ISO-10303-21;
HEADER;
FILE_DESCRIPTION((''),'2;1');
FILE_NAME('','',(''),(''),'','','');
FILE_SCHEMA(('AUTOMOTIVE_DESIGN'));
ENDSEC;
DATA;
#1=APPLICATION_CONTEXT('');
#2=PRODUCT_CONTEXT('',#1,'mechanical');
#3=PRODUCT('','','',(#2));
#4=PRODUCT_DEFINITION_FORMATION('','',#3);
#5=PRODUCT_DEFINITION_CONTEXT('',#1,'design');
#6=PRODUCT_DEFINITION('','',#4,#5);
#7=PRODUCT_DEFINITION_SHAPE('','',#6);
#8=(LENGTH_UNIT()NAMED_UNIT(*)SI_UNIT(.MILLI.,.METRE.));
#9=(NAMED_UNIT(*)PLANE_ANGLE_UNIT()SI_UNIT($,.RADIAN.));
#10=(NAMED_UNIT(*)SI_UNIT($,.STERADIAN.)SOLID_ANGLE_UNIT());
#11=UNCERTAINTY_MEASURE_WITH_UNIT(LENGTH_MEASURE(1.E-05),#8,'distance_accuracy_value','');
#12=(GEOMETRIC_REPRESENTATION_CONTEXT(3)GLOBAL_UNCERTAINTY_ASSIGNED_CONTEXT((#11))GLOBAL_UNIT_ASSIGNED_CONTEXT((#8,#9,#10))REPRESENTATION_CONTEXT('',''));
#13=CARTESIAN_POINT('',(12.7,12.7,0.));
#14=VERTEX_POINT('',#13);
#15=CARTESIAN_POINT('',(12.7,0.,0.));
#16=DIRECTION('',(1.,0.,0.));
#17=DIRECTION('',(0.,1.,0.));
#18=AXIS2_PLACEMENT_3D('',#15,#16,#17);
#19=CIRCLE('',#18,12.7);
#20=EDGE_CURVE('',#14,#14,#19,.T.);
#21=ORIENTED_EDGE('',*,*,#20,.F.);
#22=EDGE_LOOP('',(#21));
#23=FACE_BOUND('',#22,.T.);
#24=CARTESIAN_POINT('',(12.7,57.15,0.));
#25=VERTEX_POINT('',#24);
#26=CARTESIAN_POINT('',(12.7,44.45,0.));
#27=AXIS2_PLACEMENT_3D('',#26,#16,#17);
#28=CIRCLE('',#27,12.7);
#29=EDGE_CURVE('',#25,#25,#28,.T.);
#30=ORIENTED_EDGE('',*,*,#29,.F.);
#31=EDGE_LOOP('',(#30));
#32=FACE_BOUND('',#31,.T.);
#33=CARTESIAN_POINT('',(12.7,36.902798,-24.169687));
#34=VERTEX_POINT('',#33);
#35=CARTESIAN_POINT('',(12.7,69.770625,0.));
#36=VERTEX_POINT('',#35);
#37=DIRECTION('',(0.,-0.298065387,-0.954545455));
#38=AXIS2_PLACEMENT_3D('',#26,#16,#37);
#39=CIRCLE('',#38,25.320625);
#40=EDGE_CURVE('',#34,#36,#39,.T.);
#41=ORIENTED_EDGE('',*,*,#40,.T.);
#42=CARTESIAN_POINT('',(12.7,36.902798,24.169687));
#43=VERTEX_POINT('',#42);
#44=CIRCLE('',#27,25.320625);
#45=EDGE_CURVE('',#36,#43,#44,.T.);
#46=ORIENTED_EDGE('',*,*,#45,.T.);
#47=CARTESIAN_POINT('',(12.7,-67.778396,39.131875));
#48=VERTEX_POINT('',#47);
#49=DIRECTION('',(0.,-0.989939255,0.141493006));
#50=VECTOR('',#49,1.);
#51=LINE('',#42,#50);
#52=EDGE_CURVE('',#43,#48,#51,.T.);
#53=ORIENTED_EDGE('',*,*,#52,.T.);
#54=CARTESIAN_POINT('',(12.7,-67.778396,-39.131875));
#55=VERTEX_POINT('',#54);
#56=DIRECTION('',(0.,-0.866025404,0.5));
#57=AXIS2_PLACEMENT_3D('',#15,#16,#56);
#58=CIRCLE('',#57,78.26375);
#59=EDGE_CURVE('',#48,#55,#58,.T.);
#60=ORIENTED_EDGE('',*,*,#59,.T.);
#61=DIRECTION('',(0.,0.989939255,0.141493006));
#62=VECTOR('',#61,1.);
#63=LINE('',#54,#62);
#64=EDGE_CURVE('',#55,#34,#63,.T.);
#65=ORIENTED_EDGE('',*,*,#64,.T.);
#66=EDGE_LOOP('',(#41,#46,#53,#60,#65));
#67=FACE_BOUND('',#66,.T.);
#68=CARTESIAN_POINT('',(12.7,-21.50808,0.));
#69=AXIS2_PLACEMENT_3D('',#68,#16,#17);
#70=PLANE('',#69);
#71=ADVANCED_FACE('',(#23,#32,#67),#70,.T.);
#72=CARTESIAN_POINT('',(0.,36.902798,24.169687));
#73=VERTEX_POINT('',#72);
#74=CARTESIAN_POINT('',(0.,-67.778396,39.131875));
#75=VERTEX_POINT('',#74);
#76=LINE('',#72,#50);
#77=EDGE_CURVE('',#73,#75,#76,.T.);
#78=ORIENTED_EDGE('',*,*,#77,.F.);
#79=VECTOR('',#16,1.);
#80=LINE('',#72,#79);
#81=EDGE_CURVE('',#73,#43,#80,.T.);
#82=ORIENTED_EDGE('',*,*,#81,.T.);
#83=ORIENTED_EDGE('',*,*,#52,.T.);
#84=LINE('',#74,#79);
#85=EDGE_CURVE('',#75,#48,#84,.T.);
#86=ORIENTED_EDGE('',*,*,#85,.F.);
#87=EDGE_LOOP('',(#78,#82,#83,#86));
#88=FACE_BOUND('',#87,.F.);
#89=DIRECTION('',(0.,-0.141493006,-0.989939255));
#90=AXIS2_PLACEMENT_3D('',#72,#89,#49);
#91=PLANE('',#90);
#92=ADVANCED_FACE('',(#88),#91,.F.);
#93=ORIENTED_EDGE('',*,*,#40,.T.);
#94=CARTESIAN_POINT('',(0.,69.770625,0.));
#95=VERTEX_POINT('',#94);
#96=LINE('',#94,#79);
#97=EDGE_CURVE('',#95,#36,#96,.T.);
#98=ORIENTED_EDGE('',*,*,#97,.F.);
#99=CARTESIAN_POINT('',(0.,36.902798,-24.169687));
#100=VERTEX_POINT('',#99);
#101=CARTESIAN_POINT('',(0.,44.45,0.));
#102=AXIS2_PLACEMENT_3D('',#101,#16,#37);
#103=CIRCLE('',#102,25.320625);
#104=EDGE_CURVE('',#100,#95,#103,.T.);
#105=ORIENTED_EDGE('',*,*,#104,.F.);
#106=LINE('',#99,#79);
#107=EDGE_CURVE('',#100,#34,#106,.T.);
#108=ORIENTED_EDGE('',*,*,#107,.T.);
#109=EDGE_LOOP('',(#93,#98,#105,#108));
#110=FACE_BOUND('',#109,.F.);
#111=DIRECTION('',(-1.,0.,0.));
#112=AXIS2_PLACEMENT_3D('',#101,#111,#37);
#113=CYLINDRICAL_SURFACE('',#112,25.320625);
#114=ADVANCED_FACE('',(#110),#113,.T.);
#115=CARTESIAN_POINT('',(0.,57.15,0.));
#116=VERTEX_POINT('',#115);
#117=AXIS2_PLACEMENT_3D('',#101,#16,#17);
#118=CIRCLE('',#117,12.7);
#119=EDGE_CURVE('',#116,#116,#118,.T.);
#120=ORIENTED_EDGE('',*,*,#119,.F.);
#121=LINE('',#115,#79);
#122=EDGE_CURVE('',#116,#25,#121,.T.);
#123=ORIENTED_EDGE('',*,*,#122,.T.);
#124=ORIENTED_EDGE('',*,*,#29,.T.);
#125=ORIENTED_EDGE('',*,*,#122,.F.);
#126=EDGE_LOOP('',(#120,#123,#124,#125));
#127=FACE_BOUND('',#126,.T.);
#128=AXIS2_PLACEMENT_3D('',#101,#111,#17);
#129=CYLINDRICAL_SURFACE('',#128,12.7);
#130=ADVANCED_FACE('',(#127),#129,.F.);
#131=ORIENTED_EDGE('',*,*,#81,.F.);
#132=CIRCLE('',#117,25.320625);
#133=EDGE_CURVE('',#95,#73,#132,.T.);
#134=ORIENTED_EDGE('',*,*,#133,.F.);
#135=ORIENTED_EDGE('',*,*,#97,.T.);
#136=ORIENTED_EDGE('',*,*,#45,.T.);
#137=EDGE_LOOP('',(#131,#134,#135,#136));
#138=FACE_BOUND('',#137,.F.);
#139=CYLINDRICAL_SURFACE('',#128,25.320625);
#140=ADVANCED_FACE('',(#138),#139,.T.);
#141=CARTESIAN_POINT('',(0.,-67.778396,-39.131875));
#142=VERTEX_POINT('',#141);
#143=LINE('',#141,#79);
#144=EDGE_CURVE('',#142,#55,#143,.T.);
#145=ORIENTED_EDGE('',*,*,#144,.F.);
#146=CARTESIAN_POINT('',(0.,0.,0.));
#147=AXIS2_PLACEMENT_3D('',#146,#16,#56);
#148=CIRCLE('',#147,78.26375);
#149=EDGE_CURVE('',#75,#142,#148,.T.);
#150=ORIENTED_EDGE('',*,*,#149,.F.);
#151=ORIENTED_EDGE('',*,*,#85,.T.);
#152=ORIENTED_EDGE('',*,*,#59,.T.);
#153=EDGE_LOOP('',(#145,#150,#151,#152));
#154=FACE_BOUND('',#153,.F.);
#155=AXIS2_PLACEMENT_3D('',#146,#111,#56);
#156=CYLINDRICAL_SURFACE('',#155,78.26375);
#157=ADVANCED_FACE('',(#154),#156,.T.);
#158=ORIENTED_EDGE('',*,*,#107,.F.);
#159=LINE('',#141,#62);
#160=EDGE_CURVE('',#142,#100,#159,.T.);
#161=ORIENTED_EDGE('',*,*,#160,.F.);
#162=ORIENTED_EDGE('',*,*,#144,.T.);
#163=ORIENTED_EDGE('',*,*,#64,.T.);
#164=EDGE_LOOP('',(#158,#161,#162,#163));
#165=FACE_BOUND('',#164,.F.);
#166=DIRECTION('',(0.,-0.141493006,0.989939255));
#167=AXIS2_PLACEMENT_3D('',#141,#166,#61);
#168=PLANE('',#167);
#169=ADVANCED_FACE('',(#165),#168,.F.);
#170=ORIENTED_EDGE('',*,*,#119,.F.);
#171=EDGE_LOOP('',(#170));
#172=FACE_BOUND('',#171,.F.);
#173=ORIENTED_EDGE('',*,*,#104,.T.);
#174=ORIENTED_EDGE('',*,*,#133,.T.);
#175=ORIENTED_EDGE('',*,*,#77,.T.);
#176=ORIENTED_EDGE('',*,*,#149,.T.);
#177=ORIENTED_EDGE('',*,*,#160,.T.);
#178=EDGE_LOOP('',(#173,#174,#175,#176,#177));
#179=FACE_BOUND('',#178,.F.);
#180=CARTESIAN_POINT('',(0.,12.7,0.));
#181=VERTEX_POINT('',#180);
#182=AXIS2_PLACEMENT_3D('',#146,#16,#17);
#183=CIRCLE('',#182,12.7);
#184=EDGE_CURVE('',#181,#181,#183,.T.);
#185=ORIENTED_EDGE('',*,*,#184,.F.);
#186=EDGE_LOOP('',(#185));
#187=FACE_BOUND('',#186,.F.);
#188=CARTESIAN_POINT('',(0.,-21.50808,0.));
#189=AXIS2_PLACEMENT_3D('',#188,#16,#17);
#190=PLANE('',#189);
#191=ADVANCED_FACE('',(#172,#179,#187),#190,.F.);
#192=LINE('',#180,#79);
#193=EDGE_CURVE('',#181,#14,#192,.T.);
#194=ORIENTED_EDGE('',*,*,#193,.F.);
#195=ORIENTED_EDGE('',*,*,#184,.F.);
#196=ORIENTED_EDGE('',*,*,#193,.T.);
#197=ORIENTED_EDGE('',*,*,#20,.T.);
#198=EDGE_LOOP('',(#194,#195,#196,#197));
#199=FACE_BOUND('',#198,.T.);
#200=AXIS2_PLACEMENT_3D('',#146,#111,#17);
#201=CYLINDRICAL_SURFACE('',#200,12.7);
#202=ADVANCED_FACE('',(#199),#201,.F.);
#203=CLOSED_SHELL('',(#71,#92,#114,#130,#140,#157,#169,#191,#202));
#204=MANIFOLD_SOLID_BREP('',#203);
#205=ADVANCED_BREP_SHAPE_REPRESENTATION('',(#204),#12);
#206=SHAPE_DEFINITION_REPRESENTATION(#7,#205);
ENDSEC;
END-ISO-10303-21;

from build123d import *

# Parameters (mm, degrees)
F0_R     = 12.7
F1_DEPTH = 12.7


# Not quite as in the source:
# - a length typed as a fraction of an inch, garbled in the dataset ("3 / 203.2 mm" for 3/8 in), is restored


with BuildPart() as f1:
    # F0 (on Right) → F1 (new body)
    with BuildSketch(Plane.YZ):
        with BuildLine():
            ThreePointArc((36.9027980984, -24.1696875), (19.129375, 0), (36.9027980984, 24.1696875))
            Line((36.9027980984, 24.1696875), (-67.7783956954, 39.131875))
            ThreePointArc((-67.7783956954, 39.131875), (-78.26375, 0), (-67.7783956954, -39.131875))
            Line((-67.7783956954, -39.131875), (36.9027980984, -24.1696875))
        make_face()
        Circle(F0_R, mode=Mode.SUBTRACT)
        with BuildLine():
            ThreePointArc((36.9027980984, -24.1696875), (59.4505696765, -20.3989450651), (69.770625, 0))
            ThreePointArc((69.770625, 0), (59.4505696765, 20.3989450651), (36.9027980984, 24.1696875))
            ThreePointArc((36.9027980984, 24.1696875), (19.129375, 0), (36.9027980984, -24.1696875))
        make_face()
        with Locations((44.45, 0)):
            Circle(F0_R, mode=Mode.SUBTRACT)
    extrude(amount=F1_DEPTH)


solid = f1.part
